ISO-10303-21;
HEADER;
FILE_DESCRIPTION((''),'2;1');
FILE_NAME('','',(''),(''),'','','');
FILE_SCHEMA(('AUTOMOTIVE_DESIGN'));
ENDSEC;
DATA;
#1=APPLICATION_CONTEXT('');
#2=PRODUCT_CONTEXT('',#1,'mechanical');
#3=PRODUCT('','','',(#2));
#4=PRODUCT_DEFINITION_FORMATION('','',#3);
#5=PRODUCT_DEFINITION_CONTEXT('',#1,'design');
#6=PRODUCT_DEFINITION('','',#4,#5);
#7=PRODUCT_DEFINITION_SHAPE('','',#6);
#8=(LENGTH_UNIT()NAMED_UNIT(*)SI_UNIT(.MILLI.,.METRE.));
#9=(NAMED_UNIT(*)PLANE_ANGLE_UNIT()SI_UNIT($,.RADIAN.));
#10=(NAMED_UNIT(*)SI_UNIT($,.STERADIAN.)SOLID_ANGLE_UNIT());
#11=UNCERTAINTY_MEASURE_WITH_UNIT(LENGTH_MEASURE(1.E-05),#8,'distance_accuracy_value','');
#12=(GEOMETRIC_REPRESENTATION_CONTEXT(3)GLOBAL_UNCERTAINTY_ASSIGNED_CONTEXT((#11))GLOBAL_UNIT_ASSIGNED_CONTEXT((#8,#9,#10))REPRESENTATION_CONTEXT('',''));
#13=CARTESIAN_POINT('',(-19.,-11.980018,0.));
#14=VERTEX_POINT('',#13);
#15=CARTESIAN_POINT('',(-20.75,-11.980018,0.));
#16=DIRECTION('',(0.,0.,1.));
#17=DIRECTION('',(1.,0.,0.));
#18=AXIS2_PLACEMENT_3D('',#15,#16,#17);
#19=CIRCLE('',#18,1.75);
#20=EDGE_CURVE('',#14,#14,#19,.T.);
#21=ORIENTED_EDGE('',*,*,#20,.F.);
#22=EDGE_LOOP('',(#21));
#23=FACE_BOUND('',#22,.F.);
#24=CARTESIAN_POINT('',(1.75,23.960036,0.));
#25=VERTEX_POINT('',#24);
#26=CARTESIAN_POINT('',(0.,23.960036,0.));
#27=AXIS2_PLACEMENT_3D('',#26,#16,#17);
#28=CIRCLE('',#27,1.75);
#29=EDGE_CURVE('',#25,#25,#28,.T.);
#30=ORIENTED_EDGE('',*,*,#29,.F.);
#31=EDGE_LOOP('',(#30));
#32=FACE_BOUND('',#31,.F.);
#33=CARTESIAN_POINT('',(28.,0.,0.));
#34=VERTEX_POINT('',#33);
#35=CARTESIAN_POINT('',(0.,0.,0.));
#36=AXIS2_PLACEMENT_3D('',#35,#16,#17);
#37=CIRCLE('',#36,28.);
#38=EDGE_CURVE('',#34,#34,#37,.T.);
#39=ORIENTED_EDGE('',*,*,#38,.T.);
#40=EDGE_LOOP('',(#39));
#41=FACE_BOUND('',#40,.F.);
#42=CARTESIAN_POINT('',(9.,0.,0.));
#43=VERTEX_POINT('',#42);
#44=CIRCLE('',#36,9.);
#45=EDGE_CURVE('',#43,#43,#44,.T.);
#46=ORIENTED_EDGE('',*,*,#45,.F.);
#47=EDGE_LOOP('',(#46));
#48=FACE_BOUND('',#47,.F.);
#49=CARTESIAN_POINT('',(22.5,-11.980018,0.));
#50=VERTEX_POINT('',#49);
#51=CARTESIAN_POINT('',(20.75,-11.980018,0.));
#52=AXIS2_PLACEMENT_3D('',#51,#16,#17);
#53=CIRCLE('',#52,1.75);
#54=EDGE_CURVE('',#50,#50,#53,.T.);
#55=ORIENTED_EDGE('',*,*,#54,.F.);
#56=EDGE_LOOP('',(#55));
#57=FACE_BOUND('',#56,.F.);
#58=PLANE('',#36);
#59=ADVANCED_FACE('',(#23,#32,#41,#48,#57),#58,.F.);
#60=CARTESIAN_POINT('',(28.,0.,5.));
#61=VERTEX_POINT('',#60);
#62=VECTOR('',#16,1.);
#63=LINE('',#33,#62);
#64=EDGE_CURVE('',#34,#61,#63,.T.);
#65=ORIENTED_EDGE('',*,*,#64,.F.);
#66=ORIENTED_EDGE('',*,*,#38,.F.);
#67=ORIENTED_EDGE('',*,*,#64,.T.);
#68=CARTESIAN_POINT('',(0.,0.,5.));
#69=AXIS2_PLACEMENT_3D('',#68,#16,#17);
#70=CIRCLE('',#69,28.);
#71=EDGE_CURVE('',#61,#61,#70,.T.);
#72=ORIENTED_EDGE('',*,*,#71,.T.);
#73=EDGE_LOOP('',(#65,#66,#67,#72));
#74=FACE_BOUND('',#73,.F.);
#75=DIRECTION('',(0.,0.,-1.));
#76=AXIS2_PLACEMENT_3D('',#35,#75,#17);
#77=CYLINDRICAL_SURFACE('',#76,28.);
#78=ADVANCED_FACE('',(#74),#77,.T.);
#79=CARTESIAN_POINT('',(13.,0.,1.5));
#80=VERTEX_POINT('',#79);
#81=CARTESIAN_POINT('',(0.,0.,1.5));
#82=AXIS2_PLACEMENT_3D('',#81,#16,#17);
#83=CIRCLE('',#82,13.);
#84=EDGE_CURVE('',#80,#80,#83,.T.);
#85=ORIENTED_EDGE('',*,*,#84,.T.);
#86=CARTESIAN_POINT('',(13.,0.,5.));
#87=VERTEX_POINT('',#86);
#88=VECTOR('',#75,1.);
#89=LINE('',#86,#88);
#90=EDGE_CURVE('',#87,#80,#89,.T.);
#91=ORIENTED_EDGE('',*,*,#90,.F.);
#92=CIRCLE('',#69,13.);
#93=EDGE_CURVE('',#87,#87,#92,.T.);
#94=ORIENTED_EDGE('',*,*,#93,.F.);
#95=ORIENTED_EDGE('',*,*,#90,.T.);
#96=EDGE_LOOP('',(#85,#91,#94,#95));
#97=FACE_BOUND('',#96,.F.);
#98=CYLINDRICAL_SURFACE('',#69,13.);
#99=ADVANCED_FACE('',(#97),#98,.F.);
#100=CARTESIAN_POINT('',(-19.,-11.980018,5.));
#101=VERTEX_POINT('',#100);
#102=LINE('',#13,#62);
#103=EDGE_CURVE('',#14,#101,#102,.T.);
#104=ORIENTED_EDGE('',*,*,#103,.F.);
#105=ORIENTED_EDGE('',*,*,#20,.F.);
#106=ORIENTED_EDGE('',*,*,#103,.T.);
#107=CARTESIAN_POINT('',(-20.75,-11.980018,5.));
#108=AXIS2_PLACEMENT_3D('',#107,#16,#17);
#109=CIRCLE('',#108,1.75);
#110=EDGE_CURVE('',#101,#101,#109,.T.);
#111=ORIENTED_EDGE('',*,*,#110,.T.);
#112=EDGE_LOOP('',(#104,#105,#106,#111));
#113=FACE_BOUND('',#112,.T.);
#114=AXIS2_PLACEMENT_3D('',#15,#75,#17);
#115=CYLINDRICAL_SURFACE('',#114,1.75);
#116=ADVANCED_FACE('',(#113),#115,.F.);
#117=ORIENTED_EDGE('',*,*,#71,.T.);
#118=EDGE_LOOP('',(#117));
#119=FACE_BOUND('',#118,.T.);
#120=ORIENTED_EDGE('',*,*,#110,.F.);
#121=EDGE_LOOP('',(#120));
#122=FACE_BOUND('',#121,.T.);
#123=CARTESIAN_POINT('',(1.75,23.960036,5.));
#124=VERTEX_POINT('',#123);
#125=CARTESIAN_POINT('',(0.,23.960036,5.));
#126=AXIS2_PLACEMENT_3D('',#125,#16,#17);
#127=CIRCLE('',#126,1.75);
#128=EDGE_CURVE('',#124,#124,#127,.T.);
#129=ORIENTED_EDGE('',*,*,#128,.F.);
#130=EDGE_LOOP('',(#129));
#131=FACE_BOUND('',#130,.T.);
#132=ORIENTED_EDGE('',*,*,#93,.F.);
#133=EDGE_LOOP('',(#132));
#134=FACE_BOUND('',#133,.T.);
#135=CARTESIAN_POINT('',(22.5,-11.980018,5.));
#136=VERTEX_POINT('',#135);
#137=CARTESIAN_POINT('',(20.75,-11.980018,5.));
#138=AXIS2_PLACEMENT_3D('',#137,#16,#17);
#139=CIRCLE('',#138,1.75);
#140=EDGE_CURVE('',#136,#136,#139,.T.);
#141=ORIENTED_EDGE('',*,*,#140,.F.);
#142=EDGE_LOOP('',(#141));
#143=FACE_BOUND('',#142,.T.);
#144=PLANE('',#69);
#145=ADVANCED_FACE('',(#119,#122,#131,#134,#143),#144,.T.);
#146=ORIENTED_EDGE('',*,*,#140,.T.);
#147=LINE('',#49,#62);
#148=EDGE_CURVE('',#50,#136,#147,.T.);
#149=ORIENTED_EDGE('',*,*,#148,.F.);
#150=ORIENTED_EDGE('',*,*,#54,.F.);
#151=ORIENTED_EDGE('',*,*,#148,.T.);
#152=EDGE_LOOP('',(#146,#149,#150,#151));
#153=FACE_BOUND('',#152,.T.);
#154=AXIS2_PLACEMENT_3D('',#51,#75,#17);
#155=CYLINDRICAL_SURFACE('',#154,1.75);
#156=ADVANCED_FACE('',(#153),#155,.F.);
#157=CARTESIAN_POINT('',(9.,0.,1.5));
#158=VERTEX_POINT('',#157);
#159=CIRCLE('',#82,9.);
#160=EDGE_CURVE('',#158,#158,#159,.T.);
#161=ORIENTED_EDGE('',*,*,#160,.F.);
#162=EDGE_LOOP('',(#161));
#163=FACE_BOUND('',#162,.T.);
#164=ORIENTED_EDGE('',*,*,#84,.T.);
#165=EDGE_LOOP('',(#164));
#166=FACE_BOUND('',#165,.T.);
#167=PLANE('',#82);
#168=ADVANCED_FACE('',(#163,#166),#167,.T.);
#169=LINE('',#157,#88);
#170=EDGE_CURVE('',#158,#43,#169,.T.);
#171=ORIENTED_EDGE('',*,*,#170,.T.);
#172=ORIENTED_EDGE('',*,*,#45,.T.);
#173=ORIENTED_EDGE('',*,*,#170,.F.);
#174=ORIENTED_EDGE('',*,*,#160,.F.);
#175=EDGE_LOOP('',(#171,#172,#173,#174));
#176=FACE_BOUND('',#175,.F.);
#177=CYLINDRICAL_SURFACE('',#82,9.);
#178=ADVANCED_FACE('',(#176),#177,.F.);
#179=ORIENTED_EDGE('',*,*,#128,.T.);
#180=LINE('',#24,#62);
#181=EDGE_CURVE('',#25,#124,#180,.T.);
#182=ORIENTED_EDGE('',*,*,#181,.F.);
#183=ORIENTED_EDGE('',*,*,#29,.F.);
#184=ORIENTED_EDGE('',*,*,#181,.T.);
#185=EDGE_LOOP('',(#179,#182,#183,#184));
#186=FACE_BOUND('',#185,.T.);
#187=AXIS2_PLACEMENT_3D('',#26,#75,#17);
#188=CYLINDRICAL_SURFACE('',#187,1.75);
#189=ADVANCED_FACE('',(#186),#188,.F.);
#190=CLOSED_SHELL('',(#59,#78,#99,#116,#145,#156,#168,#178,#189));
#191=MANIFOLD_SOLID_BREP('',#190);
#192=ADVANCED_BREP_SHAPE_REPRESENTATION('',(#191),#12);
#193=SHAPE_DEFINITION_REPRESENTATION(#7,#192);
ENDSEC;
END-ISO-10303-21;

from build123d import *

# Parameters (mm, degrees)
F0_R     = 28
F0_R_2   = 1.75
F1_DEPTH = 5
F2_R     = 13
F3_DEPTH = 3.5
F4_R     = 9
F5_DEPTH = 1.501


# Not quite as in the source:
# - a feature names something its author has since deleted; it is built from what else it names


with BuildPart() as f1:
    # F0 (on Top) → F1 (new body)
    with BuildSketch(Plane.XY):
        Circle(F0_R)
        with Locations((-20.75, -11.9800180857)):
            Circle(F0_R_2, mode=Mode.SUBTRACT)
        with Locations((20.75, -11.9800180857)):
            Circle(F0_R_2, mode=Mode.SUBTRACT)
        with Locations((0, 23.9600361714)):
            Circle(F0_R_2, mode=Mode.SUBTRACT)
    extrude(amount=F1_DEPTH)

    # F2 (on face) → F3 (cut)
    with BuildSketch(Plane.XY.offset(5)):
        Circle(F2_R)
    extrude(amount=-F3_DEPTH, mode=Mode.SUBTRACT)

    # F4 (on face) → F5 (cut, through all)
    with BuildSketch(Plane.XY.offset(1.5)):
        Circle(F4_R)
    extrude(amount=-F5_DEPTH, mode=Mode.SUBTRACT)


solid = f1.part
